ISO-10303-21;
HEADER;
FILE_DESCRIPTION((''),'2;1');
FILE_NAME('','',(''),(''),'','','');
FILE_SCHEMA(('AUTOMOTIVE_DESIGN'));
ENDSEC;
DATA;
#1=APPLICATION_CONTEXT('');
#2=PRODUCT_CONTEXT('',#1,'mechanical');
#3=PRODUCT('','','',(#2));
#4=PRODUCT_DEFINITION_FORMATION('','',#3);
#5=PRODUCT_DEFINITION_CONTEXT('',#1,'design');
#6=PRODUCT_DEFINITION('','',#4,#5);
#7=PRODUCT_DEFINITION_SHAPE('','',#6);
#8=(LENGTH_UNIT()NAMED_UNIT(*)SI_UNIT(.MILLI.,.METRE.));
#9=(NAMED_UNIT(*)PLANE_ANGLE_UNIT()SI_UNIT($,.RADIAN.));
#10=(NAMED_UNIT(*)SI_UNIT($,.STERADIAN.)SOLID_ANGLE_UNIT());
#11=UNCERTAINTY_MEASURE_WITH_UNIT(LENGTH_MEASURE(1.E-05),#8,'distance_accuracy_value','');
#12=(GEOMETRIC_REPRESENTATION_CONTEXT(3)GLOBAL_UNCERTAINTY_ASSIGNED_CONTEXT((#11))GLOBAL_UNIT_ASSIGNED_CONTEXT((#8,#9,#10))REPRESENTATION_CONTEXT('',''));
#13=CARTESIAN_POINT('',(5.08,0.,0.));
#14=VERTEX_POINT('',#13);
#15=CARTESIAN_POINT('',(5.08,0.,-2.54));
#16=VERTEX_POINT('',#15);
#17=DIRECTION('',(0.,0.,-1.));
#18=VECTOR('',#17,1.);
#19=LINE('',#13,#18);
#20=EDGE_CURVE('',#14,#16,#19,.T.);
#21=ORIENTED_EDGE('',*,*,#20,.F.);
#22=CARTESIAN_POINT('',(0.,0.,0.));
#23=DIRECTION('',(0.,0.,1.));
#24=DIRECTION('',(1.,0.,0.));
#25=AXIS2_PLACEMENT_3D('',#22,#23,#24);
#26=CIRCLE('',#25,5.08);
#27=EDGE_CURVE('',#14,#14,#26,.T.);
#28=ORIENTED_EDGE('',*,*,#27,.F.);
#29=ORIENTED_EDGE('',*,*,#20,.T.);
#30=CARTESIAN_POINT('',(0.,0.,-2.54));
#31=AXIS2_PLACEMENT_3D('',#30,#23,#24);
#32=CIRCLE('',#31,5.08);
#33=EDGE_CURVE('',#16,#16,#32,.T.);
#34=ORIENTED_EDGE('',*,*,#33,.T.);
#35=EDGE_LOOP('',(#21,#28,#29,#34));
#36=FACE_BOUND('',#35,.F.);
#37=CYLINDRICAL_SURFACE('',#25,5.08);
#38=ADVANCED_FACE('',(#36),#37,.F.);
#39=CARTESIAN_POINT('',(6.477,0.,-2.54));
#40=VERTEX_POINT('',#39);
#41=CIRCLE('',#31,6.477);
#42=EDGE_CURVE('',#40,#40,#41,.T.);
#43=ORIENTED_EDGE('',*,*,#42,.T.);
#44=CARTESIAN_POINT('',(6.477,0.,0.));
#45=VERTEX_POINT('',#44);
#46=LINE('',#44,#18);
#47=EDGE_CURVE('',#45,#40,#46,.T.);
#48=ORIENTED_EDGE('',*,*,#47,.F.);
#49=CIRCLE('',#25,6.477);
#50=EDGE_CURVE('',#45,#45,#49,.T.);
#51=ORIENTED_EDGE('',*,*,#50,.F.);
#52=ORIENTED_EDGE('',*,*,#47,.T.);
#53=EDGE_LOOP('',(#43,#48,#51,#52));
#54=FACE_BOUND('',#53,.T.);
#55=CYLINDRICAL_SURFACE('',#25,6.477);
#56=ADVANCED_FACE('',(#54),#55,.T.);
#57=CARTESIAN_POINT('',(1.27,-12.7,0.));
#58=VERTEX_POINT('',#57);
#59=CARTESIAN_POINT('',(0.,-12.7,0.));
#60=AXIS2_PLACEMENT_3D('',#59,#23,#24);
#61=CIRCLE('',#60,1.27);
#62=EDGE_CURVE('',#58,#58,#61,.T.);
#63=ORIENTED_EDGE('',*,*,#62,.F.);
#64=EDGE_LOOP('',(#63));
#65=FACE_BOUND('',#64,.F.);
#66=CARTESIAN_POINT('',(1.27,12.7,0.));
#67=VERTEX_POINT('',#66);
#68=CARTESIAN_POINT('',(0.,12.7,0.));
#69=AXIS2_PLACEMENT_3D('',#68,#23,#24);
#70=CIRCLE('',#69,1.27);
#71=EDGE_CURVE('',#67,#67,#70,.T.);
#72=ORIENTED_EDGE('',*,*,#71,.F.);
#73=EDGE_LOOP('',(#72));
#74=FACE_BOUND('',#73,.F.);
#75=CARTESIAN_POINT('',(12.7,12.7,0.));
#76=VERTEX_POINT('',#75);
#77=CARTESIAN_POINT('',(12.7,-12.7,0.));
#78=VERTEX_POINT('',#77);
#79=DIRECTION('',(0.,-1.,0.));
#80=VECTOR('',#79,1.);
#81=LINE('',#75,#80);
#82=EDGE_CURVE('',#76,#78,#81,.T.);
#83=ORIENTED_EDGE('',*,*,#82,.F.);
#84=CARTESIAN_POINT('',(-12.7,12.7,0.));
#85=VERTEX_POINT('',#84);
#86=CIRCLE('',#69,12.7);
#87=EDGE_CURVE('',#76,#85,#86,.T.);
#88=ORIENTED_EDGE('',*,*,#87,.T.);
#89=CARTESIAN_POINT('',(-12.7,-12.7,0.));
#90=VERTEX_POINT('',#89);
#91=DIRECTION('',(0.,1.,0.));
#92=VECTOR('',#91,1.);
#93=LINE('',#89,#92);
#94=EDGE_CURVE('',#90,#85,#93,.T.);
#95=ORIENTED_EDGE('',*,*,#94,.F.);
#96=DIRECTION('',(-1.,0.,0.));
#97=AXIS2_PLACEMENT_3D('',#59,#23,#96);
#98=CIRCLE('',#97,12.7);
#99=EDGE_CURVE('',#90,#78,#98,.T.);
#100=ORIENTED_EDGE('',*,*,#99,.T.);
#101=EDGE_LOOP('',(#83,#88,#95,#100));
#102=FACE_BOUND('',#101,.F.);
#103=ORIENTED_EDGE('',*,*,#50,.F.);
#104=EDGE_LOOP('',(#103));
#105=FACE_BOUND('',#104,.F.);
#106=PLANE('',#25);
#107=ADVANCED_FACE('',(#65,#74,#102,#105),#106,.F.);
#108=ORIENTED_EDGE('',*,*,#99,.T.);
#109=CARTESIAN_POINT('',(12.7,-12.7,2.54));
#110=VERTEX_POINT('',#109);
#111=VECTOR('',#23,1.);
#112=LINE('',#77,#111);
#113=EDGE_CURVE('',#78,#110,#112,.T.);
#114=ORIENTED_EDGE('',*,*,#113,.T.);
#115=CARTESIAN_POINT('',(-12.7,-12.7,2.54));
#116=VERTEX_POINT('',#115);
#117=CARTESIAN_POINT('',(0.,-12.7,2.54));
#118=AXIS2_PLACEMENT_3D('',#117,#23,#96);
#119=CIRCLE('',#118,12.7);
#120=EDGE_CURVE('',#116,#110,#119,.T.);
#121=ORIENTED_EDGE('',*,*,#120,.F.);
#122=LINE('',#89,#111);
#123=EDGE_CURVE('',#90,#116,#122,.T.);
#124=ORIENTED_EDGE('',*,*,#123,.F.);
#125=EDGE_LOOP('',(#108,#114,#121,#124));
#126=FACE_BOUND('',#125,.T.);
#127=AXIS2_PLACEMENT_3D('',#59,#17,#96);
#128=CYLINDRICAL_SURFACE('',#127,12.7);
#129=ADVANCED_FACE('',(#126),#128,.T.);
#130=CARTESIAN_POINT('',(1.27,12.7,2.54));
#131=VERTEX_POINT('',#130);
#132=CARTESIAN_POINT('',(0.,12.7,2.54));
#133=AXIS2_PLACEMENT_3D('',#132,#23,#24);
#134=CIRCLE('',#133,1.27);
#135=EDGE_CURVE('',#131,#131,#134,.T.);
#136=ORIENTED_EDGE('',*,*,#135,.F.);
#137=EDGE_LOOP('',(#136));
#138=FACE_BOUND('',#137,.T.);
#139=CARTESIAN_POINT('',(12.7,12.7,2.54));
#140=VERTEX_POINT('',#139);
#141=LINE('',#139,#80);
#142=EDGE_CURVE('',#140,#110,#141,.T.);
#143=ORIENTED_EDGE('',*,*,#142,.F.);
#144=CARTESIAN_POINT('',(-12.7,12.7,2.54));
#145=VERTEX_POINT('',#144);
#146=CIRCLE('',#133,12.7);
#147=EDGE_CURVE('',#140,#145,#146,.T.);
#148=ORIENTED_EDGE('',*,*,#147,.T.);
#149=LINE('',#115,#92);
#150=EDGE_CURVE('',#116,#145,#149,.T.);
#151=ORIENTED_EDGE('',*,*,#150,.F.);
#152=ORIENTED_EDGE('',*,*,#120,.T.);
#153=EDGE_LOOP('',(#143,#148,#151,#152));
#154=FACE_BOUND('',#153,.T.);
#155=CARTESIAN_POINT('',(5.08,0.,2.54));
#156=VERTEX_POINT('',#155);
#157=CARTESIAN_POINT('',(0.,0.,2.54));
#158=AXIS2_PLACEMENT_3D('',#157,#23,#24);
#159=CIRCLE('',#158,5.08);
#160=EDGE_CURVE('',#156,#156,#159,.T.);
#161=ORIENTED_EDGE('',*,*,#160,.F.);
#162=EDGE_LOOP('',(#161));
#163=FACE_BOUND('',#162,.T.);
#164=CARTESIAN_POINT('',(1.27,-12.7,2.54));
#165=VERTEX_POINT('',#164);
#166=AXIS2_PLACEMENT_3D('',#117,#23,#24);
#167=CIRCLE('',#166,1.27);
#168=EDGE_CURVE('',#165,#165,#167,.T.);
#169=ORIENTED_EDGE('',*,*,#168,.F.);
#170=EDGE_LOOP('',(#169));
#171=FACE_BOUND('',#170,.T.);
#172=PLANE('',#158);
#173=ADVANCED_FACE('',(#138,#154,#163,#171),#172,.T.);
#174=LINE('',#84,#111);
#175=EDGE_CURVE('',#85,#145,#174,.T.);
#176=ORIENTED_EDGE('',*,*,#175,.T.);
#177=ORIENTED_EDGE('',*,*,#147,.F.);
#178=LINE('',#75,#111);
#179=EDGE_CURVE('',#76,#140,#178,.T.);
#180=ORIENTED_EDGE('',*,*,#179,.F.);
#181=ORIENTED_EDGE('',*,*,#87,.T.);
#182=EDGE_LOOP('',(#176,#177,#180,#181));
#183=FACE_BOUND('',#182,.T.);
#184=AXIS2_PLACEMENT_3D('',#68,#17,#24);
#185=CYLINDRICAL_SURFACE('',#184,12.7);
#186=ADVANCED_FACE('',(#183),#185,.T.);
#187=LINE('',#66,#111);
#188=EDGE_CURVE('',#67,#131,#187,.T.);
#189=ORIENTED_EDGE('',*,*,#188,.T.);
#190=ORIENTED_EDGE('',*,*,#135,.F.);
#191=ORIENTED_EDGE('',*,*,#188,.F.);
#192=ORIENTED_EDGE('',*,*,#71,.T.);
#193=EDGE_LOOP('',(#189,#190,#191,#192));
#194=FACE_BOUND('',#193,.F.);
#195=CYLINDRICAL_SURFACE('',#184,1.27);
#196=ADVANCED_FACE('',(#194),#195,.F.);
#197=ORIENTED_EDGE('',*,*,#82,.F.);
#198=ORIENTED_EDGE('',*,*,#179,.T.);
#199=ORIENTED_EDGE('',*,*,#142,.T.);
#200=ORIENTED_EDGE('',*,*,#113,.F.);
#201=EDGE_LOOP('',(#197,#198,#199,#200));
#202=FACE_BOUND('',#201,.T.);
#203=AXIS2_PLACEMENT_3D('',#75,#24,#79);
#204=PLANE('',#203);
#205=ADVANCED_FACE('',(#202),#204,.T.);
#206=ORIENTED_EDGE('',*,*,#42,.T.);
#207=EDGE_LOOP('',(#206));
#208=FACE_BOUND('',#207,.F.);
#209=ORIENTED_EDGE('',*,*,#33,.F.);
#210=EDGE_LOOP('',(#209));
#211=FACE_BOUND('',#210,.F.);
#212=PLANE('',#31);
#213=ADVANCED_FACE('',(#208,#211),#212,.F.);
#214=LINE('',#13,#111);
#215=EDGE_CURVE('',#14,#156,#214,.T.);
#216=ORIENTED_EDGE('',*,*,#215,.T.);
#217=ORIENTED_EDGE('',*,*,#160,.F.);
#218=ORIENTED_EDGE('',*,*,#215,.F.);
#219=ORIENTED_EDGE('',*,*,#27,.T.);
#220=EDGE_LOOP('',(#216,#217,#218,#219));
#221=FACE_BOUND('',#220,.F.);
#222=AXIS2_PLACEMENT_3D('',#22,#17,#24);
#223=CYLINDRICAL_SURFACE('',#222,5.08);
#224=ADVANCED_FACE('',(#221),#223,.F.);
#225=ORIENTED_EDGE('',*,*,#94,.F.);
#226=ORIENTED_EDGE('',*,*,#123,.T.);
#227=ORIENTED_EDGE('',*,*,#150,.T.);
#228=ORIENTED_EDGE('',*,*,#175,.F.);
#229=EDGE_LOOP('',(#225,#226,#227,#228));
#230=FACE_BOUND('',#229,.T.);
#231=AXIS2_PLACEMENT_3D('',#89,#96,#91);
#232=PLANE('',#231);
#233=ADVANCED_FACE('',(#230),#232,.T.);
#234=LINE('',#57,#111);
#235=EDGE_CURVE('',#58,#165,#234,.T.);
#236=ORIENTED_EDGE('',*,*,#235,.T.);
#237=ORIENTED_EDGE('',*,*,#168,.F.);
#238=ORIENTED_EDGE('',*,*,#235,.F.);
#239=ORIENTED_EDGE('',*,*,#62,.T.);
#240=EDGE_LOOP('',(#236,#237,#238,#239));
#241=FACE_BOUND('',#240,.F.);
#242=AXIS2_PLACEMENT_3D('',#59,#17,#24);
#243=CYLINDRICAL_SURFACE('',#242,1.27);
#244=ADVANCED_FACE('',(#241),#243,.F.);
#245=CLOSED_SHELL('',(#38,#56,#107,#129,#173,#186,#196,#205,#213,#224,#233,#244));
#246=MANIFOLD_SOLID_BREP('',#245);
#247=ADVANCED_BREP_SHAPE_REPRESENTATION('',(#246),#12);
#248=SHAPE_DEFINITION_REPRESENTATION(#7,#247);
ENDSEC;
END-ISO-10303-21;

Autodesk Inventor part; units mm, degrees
ref_plane "YZ Plane" through (0, 0, 0) normal (1, 0, 0) x (0, 1, 0)
ref_plane "XZ Plane" through (0, 0, 0) normal (0, 1, 0) x (-1, 0, 0)
ref_plane "XY Plane" through (0, 0, 0) normal (0, 0, 1) x (1, 0, 0)
sketch "Sketch1" plane through (0, 0, 0) normal (0, 0, 1) x (1, 0, 0)
  line L0 (0, 0) -> (0, 12.7) construction
  line L1 (0, 0) -> (0, -12.7) construction
  circle A0 centre (0, 12.7) radius 1.27
  circle A1 centre (0, -12.7) radius 1.27
  arc A2 (12.7, 12.7) -> (-12.7, 12.7) centre (0, 12.7) ccw
  arc A3 (-12.7, -12.7) -> (12.7, -12.7) centre (0, -12.7) ccw
  line L2 (-12.7, -12.7) -> (-12.7, 12.7)
  line L3 (12.7, 12.7) -> (12.7, -12.7)
  circle A4 centre (0, 0) radius 6.477
  circle A5 centre (0, 0) radius 5.08
  dimension "d0" = 12.7
  dimension "d1" = 12.7
  dimension "d2" = 2.54
  dimension "d3" = 2.54
  dimension "d4" = 25.4
  dimension "d5" = 25.4
  dimension "d6" = 12.954
  dimension "d7" = 10.16
extrude "Extrusion1" add sketch "Sketch1" along normal blind 2.54 contours L3 A3 L2 A2 | A4
extrude "Extrusion2" add sketch "Sketch1" against normal blind 2.54 contours A4
properties part number "bearing_bracket_cover_3DPrint"
